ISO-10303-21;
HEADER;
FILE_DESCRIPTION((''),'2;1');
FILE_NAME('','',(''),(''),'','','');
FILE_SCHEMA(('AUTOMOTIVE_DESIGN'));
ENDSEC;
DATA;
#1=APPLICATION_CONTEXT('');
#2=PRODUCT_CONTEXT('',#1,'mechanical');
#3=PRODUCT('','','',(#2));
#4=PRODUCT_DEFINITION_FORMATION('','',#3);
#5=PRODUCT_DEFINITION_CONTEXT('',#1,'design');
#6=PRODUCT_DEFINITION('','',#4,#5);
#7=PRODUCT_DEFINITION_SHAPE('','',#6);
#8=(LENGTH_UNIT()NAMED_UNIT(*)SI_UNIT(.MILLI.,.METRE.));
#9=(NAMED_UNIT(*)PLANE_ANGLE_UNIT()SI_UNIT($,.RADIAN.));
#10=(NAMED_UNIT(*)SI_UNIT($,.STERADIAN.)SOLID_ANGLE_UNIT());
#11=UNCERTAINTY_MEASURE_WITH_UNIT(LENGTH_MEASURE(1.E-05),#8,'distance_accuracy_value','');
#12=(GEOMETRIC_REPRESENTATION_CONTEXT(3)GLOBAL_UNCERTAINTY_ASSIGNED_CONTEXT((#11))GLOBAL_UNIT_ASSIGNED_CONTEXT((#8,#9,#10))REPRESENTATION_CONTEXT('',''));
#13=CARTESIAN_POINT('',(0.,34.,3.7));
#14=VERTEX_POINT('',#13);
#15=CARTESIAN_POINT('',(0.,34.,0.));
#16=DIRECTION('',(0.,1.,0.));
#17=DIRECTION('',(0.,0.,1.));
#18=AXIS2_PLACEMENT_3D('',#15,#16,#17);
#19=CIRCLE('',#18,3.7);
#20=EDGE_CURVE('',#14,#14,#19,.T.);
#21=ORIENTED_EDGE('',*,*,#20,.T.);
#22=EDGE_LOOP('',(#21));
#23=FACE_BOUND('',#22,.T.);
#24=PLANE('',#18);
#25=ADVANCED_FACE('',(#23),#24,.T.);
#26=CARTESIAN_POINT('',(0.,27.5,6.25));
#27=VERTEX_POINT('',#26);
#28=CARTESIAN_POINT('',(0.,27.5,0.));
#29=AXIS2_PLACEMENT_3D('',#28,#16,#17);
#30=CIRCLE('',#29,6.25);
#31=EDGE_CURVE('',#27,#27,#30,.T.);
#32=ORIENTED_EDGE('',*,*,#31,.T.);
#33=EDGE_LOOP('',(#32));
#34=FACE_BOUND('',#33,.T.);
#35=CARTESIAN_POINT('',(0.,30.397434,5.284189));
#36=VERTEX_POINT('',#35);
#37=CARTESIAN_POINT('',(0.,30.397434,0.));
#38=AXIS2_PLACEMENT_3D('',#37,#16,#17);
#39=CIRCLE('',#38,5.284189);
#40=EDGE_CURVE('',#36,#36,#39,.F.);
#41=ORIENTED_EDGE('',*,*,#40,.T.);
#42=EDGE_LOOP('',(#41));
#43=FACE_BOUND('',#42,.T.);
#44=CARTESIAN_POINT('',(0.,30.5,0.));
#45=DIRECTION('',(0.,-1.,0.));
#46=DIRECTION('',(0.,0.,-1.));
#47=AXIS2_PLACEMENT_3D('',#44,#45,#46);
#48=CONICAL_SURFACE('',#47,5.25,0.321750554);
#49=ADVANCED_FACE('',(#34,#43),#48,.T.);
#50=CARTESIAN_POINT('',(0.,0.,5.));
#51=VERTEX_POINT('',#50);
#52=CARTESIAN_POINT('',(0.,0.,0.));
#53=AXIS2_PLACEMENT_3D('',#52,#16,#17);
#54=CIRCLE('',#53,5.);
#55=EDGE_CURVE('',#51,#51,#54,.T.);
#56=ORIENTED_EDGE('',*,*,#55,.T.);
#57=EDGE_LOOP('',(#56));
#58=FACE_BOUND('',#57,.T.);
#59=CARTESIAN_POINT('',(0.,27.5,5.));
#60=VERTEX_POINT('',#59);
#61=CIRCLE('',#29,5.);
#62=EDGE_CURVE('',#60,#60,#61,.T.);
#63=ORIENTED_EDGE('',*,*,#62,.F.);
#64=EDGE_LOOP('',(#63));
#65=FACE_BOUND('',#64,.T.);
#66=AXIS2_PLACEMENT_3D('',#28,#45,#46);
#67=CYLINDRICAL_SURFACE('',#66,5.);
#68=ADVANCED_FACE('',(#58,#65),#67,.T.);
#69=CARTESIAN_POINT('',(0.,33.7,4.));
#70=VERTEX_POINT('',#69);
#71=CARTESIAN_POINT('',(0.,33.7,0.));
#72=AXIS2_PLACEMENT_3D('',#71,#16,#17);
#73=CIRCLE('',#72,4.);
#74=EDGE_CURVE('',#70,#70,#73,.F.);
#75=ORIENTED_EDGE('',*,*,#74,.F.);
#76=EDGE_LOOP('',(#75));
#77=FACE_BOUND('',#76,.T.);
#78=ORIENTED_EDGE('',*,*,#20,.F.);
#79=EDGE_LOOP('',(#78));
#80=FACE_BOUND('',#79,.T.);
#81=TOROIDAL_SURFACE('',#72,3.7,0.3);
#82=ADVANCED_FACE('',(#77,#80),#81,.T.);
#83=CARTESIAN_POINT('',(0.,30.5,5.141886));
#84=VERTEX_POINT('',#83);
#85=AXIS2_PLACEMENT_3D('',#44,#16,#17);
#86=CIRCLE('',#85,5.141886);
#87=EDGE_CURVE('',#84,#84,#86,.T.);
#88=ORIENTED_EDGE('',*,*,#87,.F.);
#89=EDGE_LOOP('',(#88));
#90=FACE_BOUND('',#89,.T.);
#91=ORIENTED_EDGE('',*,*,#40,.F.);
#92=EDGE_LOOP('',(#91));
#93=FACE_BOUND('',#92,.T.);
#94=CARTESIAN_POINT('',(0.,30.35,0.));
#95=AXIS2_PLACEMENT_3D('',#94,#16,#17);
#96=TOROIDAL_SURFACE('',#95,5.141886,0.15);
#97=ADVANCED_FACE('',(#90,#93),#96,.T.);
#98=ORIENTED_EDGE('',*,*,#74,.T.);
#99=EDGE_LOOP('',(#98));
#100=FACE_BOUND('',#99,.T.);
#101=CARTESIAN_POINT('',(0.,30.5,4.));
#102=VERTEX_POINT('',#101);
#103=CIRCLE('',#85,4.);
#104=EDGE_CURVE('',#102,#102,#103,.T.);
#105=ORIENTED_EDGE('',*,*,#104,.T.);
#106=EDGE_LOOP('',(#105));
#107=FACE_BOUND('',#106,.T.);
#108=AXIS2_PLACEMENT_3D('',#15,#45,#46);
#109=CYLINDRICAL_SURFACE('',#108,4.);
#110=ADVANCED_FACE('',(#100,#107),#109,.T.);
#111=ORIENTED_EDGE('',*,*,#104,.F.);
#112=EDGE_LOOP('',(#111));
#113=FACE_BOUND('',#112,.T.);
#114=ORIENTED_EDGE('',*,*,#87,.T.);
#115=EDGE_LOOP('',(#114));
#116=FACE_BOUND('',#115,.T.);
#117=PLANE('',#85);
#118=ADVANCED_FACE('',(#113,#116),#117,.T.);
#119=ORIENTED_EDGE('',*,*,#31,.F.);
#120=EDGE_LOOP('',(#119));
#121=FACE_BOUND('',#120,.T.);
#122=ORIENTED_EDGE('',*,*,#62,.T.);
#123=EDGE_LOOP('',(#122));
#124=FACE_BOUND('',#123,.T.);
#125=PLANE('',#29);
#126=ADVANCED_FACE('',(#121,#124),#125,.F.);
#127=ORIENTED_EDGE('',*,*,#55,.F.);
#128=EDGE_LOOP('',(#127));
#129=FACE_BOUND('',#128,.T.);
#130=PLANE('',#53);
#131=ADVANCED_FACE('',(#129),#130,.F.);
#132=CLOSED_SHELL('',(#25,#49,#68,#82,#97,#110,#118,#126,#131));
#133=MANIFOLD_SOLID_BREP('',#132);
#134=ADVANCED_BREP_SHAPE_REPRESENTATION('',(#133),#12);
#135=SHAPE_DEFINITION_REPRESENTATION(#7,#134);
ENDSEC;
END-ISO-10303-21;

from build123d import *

# Parameters (mm, degrees)
SKETCH1_R           = 5
BOSS_EXTRUDE1_DEPTH = 27.5
SKETCH2_R           = 6.25
BOSS_EXTRUDE2_DEPTH = 3
SKETCH3_R           = 4
BOSS_EXTRUDE3_DEPTH = 3.5
CHAMFER1_SIZE       = 3
CHAMFER1_SIZE_2     = 1
FILLET1_R           = 0.3
FILLET2_R           = 0.15


with BuildPart() as part:
    # Sketch1 → Boss-Extrude1 (new body)
    with BuildSketch(Plane(origin=(0, 0, 0), x_dir=(1, 0, 0), z_dir=(0, 1, 0))):
        with Locations(Location((0, 0, 0), (0, 0, 270))):
            Circle(SKETCH1_R)
    extrude(amount=BOSS_EXTRUDE1_DEPTH)

    # Sketch2 → Boss-Extrude2 (add)
    with BuildSketch(Plane(origin=(0, 27.5, 0), x_dir=(1, 0, 0), z_dir=(0, 1, 0))):
        with Locations(Location((0, 0, 0), (0, 0, 270))):
            Circle(SKETCH2_R)
    extrude(amount=BOSS_EXTRUDE2_DEPTH)

    # Sketch3 → Boss-Extrude3 (add)
    with BuildSketch(Plane(origin=(0, 30.5, 0), x_dir=(1, 0, 0), z_dir=(0, 1, 0))):
        with Locations(Location((0, 0, 0), (0, 0, 270))):
            Circle(SKETCH3_R)
    extrude(amount=BOSS_EXTRUDE3_DEPTH)

    # Chamfer1
    # the kernel refuses this chamfer: 3, 1 mm, written as the material it takes off along each edge
    with BuildSketch(Plane(origin=(0, 30.5, 0), x_dir=(0, 0, 1), z_dir=(-1, 0, 0))) as chamfer1_piece_1:
        Polygon((6.25, -CHAMFER1_SIZE), (6.25 - CHAMFER1_SIZE_2, 0), (6.25, 0), align=None)
    revolve(axis=Axis((0, 30.5, 0), (0, 1, 0)), mode=Mode.SUBTRACT)

    # Fillet1
    fillet1_edges = [part.edges().sort_by_distance(p)[0] for p in [
        (0, 34, -4),
    ]]
    fillet(fillet1_edges, radius=FILLET1_R)

    # Fillet2
    fillet2_edges = [part.edges().sort_by_distance(p)[0] for p in [
        (0, 30.5, -5.25),
    ]]
    fillet(fillet2_edges, radius=FILLET2_R)


solid = part.part
